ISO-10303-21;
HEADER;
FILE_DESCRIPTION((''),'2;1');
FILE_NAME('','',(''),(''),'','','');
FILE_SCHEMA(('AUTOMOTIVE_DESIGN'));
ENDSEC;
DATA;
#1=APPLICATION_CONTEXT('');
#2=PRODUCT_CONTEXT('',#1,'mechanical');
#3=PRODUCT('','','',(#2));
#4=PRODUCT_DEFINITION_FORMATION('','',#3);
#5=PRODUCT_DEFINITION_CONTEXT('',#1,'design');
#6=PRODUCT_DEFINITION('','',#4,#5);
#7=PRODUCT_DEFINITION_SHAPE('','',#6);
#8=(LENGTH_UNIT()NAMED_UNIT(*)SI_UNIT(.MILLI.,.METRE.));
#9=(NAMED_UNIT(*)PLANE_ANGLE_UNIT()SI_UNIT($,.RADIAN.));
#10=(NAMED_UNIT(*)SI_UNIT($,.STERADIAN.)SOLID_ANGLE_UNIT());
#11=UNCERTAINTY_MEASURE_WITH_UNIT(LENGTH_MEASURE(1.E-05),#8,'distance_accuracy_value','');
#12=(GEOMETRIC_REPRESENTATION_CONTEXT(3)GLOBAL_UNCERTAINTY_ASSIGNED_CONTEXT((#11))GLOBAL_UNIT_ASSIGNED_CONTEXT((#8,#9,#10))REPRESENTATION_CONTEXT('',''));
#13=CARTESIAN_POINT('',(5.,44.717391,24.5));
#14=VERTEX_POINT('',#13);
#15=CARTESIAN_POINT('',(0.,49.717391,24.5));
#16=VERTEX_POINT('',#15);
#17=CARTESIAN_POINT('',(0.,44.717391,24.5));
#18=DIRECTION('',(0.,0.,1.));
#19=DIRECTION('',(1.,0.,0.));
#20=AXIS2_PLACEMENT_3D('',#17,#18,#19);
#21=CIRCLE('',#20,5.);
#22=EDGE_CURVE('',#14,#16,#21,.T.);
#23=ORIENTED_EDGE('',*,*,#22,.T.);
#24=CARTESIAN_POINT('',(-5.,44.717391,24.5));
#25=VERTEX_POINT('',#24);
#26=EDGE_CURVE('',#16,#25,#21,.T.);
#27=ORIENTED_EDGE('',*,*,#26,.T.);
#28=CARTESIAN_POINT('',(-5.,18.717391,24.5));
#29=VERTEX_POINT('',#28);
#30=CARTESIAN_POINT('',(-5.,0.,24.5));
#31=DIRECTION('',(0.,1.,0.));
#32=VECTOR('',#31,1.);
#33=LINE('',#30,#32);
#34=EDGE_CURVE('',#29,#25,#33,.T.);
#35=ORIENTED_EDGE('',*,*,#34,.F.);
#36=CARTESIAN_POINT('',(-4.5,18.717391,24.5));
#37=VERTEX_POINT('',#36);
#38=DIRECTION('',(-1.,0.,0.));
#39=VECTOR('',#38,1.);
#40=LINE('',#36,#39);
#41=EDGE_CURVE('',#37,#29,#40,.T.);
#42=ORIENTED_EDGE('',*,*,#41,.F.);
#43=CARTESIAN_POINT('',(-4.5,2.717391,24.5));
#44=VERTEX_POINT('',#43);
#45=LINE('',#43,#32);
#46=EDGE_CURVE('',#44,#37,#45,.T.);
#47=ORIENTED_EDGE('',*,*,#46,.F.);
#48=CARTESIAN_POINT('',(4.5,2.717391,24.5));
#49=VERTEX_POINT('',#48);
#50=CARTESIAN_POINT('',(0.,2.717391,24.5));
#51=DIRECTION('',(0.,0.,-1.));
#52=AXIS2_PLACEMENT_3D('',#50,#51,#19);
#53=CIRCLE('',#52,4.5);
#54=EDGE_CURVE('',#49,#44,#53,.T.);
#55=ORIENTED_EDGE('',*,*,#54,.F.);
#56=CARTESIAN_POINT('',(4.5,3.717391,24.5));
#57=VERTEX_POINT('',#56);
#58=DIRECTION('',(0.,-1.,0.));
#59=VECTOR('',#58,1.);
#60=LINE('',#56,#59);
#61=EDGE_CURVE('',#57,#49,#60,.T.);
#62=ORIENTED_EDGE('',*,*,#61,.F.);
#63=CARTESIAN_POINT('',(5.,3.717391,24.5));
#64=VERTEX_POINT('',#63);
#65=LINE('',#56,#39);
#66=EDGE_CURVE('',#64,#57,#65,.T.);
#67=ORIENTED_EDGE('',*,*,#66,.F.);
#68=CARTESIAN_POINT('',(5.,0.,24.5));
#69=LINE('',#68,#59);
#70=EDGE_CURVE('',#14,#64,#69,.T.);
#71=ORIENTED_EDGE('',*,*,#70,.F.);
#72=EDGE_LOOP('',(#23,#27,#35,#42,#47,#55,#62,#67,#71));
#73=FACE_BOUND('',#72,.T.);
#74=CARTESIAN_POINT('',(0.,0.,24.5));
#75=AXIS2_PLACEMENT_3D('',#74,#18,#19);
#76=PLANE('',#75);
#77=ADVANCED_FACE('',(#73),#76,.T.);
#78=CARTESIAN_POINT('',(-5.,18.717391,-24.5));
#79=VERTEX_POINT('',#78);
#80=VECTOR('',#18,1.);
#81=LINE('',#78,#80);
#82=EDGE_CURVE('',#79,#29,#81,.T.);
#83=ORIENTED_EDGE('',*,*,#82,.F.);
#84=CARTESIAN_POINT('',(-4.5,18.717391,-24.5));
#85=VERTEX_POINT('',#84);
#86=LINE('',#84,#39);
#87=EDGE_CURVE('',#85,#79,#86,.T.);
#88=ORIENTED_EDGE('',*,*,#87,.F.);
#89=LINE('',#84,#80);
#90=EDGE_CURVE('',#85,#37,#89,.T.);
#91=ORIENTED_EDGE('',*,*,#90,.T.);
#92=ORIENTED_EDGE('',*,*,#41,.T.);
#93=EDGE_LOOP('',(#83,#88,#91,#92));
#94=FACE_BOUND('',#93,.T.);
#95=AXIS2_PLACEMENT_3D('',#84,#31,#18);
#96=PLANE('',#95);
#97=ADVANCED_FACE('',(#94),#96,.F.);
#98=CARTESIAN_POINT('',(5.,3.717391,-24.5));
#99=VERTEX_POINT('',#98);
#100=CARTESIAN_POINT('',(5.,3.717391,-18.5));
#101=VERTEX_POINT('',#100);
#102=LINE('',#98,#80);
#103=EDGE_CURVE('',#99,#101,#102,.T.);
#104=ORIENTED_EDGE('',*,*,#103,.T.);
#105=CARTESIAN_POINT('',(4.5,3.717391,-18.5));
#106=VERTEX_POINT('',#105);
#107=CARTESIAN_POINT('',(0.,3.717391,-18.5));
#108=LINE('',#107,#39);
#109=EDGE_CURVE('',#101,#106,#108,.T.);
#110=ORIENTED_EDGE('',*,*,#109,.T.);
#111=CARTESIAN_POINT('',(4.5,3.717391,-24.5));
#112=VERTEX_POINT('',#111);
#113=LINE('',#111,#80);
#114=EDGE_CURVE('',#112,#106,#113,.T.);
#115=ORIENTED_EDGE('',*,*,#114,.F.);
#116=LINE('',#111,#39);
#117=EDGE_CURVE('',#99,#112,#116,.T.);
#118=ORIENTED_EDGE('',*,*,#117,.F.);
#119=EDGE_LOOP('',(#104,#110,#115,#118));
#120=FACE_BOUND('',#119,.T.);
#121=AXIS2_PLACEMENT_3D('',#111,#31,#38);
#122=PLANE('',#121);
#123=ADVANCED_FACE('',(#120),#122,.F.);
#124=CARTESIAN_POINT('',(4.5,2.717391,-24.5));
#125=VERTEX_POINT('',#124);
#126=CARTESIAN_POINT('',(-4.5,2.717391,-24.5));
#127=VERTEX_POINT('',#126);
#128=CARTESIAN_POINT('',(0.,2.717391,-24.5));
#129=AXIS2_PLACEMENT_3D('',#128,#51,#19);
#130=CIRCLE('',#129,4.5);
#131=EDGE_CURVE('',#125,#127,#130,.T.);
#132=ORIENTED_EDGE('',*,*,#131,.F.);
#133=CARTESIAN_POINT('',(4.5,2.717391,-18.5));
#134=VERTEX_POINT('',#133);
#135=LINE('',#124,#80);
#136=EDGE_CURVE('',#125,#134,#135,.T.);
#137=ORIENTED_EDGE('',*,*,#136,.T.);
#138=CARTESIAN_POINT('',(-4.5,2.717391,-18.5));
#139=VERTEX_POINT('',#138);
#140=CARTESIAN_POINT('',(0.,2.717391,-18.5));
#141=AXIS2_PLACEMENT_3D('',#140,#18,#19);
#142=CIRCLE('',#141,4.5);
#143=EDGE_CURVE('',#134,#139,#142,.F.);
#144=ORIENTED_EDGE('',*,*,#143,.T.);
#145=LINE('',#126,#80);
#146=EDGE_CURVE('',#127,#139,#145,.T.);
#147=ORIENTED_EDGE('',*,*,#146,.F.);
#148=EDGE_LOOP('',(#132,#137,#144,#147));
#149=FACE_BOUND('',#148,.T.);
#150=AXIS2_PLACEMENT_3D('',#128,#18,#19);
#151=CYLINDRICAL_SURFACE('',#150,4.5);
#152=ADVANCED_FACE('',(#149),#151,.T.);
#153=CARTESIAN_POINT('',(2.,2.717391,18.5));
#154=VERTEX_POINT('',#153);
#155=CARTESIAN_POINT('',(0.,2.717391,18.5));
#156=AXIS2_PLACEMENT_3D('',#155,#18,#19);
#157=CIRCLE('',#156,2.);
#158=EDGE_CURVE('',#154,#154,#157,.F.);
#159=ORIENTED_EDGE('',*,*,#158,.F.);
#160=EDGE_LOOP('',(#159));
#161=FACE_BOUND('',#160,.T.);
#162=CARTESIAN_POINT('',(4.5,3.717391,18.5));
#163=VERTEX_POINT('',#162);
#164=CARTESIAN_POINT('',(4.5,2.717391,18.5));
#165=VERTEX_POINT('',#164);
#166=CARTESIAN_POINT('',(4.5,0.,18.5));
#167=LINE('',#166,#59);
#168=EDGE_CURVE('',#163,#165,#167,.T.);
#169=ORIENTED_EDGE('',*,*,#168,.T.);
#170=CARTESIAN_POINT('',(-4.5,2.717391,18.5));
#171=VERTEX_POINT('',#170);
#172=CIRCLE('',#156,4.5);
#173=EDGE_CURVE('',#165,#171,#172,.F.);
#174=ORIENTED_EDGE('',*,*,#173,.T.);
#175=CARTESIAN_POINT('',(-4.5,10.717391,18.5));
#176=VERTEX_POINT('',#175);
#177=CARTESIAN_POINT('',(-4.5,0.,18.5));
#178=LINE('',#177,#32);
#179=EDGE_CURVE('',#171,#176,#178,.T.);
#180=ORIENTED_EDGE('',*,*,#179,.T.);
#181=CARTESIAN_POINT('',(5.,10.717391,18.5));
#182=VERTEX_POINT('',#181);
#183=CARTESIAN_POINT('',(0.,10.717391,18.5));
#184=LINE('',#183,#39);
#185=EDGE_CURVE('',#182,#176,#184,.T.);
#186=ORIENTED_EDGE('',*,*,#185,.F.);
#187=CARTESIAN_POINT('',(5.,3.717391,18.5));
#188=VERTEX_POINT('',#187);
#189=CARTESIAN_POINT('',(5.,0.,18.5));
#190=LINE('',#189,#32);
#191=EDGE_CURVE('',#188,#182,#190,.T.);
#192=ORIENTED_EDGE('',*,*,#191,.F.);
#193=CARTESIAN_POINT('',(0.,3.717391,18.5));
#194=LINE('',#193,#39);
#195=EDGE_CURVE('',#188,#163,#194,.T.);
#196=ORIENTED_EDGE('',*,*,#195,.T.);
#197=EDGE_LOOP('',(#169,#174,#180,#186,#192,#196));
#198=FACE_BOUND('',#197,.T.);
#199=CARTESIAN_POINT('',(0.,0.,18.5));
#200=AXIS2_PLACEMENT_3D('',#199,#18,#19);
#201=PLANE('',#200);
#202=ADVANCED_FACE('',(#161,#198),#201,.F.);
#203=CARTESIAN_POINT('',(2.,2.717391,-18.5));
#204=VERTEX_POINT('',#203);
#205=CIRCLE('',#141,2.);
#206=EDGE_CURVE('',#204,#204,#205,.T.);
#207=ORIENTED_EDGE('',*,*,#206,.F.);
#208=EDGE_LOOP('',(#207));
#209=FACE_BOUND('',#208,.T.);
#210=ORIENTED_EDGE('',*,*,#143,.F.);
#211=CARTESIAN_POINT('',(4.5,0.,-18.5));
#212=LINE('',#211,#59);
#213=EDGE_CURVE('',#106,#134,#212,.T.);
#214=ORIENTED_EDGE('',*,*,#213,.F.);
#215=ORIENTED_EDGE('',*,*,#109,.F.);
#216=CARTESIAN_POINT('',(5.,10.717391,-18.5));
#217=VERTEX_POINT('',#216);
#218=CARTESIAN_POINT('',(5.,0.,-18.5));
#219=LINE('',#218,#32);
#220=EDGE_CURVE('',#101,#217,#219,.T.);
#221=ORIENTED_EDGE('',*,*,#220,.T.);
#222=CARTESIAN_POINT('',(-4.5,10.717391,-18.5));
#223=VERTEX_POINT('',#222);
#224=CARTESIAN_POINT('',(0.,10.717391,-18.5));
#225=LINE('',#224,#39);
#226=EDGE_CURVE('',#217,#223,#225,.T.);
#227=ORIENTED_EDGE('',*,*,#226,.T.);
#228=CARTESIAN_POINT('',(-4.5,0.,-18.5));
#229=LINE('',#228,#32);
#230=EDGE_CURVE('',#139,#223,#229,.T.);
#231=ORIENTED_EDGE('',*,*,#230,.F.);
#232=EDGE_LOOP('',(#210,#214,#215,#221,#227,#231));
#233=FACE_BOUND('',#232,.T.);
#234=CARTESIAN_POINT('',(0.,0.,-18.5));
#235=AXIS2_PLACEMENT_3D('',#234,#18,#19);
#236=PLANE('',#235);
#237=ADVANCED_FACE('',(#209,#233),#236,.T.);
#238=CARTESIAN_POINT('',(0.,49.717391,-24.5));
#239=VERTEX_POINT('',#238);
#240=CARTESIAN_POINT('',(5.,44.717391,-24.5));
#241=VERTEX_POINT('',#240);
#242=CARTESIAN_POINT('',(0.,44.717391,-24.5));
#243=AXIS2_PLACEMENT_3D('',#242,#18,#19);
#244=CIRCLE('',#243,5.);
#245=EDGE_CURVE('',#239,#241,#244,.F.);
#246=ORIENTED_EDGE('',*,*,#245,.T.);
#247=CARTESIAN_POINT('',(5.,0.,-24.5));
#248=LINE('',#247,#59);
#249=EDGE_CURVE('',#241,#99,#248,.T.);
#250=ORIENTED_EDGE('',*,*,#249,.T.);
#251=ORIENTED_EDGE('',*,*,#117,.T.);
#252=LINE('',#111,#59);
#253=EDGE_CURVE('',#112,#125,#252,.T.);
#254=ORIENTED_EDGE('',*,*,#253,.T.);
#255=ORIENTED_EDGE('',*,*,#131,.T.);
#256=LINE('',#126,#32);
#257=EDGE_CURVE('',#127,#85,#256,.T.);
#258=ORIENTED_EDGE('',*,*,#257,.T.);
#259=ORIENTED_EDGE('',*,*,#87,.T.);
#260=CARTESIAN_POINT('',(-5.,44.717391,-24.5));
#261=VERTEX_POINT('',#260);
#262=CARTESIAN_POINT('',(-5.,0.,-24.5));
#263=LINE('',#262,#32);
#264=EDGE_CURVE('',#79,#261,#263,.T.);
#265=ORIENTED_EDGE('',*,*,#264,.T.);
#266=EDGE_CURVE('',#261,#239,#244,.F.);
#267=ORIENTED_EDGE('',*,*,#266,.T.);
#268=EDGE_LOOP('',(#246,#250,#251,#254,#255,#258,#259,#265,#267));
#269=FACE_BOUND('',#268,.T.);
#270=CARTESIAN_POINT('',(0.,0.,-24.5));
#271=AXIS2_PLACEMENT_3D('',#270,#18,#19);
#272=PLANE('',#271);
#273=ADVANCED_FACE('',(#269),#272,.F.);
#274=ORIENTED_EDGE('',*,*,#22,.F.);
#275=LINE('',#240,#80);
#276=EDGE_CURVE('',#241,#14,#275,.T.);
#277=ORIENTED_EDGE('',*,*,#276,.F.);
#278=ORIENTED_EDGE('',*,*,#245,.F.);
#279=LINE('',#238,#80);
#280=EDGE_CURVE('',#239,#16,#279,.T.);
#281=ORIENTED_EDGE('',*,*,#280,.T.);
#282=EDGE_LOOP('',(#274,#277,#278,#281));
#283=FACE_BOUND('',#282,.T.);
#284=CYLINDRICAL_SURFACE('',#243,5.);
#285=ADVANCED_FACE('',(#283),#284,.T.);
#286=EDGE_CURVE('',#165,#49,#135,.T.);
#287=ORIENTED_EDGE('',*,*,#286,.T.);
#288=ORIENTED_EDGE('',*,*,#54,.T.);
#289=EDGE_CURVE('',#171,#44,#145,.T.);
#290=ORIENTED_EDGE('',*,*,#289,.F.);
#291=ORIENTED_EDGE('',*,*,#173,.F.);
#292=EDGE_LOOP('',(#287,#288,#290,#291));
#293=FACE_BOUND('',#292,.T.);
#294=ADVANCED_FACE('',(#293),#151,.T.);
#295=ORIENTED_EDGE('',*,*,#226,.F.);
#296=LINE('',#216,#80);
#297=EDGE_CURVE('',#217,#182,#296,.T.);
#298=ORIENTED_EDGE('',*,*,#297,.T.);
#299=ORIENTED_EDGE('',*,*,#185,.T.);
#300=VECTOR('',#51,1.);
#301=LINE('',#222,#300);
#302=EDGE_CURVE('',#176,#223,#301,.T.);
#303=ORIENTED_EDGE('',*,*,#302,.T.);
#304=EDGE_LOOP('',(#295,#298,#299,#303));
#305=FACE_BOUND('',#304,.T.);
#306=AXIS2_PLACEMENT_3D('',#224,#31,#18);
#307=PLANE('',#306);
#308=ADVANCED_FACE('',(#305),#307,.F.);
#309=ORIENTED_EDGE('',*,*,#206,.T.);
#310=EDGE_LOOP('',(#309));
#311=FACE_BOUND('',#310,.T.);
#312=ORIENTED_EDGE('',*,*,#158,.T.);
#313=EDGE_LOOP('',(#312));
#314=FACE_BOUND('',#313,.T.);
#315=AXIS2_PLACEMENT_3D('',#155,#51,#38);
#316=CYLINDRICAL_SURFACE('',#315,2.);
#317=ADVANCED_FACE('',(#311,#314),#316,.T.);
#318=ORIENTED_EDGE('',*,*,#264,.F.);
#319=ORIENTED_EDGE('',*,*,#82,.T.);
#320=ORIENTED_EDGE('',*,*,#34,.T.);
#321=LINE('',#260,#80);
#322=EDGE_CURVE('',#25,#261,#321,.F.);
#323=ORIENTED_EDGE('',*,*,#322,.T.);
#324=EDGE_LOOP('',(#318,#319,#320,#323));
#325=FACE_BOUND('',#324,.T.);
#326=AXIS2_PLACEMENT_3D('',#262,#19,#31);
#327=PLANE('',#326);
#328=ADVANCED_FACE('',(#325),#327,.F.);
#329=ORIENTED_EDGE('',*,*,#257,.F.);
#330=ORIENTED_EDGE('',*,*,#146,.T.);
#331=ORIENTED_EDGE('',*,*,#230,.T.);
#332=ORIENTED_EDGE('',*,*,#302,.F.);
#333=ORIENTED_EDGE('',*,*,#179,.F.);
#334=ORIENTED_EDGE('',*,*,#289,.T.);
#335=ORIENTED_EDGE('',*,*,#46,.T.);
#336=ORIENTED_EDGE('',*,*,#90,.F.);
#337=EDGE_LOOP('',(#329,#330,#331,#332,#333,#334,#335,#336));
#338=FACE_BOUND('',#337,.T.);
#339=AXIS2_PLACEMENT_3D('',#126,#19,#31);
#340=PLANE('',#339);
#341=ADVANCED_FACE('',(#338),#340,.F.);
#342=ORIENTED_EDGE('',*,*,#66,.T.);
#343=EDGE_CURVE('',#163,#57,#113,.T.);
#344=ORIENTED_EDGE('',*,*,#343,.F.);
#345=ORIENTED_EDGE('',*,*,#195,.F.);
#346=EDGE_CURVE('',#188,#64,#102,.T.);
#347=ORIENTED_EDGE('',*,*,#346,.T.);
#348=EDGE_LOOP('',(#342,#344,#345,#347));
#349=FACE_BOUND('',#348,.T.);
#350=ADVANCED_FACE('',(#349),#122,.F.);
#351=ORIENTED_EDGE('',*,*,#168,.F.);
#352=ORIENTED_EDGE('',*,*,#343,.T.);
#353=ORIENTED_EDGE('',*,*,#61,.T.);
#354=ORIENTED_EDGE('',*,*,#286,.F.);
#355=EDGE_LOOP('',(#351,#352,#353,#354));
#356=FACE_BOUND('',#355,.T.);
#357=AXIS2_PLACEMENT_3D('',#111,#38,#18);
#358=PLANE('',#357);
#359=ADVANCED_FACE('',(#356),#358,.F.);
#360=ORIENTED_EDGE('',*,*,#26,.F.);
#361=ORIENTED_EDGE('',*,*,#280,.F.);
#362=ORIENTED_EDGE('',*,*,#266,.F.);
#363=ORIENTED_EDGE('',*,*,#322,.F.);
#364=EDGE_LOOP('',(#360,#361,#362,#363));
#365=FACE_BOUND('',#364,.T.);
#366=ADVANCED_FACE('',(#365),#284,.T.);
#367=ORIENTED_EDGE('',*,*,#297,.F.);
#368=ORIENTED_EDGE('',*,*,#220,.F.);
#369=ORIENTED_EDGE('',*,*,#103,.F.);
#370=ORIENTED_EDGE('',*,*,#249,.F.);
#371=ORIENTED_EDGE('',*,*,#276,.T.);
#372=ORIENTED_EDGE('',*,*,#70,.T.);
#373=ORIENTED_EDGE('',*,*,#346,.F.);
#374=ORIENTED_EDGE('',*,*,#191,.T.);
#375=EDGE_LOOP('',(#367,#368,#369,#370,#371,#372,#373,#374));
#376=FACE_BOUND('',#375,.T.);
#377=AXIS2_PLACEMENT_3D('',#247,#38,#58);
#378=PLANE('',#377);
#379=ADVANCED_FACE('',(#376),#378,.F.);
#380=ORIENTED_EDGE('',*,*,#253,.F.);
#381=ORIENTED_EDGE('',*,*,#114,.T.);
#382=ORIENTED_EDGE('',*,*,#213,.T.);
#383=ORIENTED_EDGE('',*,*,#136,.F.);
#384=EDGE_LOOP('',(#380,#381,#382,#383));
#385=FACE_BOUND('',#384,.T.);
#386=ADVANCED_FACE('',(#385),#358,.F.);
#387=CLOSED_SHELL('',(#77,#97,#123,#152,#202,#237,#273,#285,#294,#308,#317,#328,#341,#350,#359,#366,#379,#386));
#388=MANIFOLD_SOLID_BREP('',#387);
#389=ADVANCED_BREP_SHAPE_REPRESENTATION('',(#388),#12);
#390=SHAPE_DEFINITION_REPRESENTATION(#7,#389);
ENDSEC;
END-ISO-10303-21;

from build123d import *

# Parameters (mm, degrees)
BOSS_EXTRUDE1_DEPTH    = 49
FILLET1_R              = 5
CUT_EXTRUDE1_START     = -2.282608696
CUT_EXTRUDE1_OUTLINE_W = 10
CUT_EXTRUDE1_OUTLINE_H = 37
CUT_EXTRUDE1_DEPTH     = 13
SKETCH6_R              = 2
BOSS_EXTRUDE2_DEPTH    = 37
CUT_EXTRUDE2_DEPTH     = 49


# Read off the part's stored shape, not the designer's step: Cut-Extrude1
with BuildPart() as part:
    # Sketch3 → Boss-Extrude1 (new body)
    with BuildSketch(Plane.XY.offset(24.5)):
        Polygon((-5, -2.282608696), (0, -2.282608696), (5, -2.282608696), (5, 49.717391304), (-5, 49.717391304), align=None)
    extrude(amount=-BOSS_EXTRUDE1_DEPTH)

    # Fillet1
    fillet1_edges = [part.edges().sort_by_distance(p)[0] for p in [
        (5, -2.282608696, 0),
        (-5, -2.282608696, 0),
        (5, 49.717391304, 0),
        (-5, 49.717391304, 0),
    ]]
    fillet(fillet1_edges, radius=FILLET1_R - 0.0001)  # a hair under: the kernel refuses the full size

    # Cut-Extrude1 outline → Cut-Extrude1 (cut)
    with BuildSketch(Plane(origin=(0, 0, 0), x_dir=(1, 0, 0), z_dir=(0, 1, 0)).offset(CUT_EXTRUDE1_START)):
        Rectangle(CUT_EXTRUDE1_OUTLINE_W, CUT_EXTRUDE1_OUTLINE_H)
    extrude(amount=CUT_EXTRUDE1_DEPTH, mode=Mode.SUBTRACT)

    # Sketch6 → Boss-Extrude2 (add)
    with BuildSketch(Plane.XY.offset(-18.5)):
        with Locations((0, 2.717391304)):
            Circle(SKETCH6_R)
    extrude(amount=BOSS_EXTRUDE2_DEPTH)

    # Sketch7 → Cut-Extrude2 (cut)
    with BuildSketch(Plane.XY.offset(24.5)):
        with BuildLine():
            Line((4.5, 3.717391304), (5, 3.717391304))
            Line((5, 3.717391304), (5, 2.717391304))
            ThreePointArc((5, 2.717391304), (3.535533906, -0.818142602), (0, -2.282608696))
            ThreePointArc((0, -2.282608696), (-3.535533906, -0.818142602), (-5, 2.717391304))
            Line((-5, 2.717391304), (-5, 18.717391304))
            Line((-5, 18.717391304), (-4.5, 18.717391304))
            Line((-4.5, 18.717391304), (-4.5, 2.717391304))
            ThreePointArc((-4.5, 2.717391304), (-3.181980515, -0.464589211), (0, -1.782608696))
            ThreePointArc((0, -1.782608696), (3.181980515, -0.464589211), (4.5, 2.717391304))
            Line((4.5, 2.717391304), (4.5, 3.717391304))
        make_face()
    extrude(amount=-CUT_EXTRUDE2_DEPTH, mode=Mode.SUBTRACT)


with BuildPart() as cut_extrude2_kept_piece:
    # of the separate pieces the step leaves, the one the design keeps (cut_extrude2_pieces_kept)
    add(part.part.solids().sort_by_distance((4.5, 3.717391304, -18.5))[0])


solid = cut_extrude2_kept_piece.part
